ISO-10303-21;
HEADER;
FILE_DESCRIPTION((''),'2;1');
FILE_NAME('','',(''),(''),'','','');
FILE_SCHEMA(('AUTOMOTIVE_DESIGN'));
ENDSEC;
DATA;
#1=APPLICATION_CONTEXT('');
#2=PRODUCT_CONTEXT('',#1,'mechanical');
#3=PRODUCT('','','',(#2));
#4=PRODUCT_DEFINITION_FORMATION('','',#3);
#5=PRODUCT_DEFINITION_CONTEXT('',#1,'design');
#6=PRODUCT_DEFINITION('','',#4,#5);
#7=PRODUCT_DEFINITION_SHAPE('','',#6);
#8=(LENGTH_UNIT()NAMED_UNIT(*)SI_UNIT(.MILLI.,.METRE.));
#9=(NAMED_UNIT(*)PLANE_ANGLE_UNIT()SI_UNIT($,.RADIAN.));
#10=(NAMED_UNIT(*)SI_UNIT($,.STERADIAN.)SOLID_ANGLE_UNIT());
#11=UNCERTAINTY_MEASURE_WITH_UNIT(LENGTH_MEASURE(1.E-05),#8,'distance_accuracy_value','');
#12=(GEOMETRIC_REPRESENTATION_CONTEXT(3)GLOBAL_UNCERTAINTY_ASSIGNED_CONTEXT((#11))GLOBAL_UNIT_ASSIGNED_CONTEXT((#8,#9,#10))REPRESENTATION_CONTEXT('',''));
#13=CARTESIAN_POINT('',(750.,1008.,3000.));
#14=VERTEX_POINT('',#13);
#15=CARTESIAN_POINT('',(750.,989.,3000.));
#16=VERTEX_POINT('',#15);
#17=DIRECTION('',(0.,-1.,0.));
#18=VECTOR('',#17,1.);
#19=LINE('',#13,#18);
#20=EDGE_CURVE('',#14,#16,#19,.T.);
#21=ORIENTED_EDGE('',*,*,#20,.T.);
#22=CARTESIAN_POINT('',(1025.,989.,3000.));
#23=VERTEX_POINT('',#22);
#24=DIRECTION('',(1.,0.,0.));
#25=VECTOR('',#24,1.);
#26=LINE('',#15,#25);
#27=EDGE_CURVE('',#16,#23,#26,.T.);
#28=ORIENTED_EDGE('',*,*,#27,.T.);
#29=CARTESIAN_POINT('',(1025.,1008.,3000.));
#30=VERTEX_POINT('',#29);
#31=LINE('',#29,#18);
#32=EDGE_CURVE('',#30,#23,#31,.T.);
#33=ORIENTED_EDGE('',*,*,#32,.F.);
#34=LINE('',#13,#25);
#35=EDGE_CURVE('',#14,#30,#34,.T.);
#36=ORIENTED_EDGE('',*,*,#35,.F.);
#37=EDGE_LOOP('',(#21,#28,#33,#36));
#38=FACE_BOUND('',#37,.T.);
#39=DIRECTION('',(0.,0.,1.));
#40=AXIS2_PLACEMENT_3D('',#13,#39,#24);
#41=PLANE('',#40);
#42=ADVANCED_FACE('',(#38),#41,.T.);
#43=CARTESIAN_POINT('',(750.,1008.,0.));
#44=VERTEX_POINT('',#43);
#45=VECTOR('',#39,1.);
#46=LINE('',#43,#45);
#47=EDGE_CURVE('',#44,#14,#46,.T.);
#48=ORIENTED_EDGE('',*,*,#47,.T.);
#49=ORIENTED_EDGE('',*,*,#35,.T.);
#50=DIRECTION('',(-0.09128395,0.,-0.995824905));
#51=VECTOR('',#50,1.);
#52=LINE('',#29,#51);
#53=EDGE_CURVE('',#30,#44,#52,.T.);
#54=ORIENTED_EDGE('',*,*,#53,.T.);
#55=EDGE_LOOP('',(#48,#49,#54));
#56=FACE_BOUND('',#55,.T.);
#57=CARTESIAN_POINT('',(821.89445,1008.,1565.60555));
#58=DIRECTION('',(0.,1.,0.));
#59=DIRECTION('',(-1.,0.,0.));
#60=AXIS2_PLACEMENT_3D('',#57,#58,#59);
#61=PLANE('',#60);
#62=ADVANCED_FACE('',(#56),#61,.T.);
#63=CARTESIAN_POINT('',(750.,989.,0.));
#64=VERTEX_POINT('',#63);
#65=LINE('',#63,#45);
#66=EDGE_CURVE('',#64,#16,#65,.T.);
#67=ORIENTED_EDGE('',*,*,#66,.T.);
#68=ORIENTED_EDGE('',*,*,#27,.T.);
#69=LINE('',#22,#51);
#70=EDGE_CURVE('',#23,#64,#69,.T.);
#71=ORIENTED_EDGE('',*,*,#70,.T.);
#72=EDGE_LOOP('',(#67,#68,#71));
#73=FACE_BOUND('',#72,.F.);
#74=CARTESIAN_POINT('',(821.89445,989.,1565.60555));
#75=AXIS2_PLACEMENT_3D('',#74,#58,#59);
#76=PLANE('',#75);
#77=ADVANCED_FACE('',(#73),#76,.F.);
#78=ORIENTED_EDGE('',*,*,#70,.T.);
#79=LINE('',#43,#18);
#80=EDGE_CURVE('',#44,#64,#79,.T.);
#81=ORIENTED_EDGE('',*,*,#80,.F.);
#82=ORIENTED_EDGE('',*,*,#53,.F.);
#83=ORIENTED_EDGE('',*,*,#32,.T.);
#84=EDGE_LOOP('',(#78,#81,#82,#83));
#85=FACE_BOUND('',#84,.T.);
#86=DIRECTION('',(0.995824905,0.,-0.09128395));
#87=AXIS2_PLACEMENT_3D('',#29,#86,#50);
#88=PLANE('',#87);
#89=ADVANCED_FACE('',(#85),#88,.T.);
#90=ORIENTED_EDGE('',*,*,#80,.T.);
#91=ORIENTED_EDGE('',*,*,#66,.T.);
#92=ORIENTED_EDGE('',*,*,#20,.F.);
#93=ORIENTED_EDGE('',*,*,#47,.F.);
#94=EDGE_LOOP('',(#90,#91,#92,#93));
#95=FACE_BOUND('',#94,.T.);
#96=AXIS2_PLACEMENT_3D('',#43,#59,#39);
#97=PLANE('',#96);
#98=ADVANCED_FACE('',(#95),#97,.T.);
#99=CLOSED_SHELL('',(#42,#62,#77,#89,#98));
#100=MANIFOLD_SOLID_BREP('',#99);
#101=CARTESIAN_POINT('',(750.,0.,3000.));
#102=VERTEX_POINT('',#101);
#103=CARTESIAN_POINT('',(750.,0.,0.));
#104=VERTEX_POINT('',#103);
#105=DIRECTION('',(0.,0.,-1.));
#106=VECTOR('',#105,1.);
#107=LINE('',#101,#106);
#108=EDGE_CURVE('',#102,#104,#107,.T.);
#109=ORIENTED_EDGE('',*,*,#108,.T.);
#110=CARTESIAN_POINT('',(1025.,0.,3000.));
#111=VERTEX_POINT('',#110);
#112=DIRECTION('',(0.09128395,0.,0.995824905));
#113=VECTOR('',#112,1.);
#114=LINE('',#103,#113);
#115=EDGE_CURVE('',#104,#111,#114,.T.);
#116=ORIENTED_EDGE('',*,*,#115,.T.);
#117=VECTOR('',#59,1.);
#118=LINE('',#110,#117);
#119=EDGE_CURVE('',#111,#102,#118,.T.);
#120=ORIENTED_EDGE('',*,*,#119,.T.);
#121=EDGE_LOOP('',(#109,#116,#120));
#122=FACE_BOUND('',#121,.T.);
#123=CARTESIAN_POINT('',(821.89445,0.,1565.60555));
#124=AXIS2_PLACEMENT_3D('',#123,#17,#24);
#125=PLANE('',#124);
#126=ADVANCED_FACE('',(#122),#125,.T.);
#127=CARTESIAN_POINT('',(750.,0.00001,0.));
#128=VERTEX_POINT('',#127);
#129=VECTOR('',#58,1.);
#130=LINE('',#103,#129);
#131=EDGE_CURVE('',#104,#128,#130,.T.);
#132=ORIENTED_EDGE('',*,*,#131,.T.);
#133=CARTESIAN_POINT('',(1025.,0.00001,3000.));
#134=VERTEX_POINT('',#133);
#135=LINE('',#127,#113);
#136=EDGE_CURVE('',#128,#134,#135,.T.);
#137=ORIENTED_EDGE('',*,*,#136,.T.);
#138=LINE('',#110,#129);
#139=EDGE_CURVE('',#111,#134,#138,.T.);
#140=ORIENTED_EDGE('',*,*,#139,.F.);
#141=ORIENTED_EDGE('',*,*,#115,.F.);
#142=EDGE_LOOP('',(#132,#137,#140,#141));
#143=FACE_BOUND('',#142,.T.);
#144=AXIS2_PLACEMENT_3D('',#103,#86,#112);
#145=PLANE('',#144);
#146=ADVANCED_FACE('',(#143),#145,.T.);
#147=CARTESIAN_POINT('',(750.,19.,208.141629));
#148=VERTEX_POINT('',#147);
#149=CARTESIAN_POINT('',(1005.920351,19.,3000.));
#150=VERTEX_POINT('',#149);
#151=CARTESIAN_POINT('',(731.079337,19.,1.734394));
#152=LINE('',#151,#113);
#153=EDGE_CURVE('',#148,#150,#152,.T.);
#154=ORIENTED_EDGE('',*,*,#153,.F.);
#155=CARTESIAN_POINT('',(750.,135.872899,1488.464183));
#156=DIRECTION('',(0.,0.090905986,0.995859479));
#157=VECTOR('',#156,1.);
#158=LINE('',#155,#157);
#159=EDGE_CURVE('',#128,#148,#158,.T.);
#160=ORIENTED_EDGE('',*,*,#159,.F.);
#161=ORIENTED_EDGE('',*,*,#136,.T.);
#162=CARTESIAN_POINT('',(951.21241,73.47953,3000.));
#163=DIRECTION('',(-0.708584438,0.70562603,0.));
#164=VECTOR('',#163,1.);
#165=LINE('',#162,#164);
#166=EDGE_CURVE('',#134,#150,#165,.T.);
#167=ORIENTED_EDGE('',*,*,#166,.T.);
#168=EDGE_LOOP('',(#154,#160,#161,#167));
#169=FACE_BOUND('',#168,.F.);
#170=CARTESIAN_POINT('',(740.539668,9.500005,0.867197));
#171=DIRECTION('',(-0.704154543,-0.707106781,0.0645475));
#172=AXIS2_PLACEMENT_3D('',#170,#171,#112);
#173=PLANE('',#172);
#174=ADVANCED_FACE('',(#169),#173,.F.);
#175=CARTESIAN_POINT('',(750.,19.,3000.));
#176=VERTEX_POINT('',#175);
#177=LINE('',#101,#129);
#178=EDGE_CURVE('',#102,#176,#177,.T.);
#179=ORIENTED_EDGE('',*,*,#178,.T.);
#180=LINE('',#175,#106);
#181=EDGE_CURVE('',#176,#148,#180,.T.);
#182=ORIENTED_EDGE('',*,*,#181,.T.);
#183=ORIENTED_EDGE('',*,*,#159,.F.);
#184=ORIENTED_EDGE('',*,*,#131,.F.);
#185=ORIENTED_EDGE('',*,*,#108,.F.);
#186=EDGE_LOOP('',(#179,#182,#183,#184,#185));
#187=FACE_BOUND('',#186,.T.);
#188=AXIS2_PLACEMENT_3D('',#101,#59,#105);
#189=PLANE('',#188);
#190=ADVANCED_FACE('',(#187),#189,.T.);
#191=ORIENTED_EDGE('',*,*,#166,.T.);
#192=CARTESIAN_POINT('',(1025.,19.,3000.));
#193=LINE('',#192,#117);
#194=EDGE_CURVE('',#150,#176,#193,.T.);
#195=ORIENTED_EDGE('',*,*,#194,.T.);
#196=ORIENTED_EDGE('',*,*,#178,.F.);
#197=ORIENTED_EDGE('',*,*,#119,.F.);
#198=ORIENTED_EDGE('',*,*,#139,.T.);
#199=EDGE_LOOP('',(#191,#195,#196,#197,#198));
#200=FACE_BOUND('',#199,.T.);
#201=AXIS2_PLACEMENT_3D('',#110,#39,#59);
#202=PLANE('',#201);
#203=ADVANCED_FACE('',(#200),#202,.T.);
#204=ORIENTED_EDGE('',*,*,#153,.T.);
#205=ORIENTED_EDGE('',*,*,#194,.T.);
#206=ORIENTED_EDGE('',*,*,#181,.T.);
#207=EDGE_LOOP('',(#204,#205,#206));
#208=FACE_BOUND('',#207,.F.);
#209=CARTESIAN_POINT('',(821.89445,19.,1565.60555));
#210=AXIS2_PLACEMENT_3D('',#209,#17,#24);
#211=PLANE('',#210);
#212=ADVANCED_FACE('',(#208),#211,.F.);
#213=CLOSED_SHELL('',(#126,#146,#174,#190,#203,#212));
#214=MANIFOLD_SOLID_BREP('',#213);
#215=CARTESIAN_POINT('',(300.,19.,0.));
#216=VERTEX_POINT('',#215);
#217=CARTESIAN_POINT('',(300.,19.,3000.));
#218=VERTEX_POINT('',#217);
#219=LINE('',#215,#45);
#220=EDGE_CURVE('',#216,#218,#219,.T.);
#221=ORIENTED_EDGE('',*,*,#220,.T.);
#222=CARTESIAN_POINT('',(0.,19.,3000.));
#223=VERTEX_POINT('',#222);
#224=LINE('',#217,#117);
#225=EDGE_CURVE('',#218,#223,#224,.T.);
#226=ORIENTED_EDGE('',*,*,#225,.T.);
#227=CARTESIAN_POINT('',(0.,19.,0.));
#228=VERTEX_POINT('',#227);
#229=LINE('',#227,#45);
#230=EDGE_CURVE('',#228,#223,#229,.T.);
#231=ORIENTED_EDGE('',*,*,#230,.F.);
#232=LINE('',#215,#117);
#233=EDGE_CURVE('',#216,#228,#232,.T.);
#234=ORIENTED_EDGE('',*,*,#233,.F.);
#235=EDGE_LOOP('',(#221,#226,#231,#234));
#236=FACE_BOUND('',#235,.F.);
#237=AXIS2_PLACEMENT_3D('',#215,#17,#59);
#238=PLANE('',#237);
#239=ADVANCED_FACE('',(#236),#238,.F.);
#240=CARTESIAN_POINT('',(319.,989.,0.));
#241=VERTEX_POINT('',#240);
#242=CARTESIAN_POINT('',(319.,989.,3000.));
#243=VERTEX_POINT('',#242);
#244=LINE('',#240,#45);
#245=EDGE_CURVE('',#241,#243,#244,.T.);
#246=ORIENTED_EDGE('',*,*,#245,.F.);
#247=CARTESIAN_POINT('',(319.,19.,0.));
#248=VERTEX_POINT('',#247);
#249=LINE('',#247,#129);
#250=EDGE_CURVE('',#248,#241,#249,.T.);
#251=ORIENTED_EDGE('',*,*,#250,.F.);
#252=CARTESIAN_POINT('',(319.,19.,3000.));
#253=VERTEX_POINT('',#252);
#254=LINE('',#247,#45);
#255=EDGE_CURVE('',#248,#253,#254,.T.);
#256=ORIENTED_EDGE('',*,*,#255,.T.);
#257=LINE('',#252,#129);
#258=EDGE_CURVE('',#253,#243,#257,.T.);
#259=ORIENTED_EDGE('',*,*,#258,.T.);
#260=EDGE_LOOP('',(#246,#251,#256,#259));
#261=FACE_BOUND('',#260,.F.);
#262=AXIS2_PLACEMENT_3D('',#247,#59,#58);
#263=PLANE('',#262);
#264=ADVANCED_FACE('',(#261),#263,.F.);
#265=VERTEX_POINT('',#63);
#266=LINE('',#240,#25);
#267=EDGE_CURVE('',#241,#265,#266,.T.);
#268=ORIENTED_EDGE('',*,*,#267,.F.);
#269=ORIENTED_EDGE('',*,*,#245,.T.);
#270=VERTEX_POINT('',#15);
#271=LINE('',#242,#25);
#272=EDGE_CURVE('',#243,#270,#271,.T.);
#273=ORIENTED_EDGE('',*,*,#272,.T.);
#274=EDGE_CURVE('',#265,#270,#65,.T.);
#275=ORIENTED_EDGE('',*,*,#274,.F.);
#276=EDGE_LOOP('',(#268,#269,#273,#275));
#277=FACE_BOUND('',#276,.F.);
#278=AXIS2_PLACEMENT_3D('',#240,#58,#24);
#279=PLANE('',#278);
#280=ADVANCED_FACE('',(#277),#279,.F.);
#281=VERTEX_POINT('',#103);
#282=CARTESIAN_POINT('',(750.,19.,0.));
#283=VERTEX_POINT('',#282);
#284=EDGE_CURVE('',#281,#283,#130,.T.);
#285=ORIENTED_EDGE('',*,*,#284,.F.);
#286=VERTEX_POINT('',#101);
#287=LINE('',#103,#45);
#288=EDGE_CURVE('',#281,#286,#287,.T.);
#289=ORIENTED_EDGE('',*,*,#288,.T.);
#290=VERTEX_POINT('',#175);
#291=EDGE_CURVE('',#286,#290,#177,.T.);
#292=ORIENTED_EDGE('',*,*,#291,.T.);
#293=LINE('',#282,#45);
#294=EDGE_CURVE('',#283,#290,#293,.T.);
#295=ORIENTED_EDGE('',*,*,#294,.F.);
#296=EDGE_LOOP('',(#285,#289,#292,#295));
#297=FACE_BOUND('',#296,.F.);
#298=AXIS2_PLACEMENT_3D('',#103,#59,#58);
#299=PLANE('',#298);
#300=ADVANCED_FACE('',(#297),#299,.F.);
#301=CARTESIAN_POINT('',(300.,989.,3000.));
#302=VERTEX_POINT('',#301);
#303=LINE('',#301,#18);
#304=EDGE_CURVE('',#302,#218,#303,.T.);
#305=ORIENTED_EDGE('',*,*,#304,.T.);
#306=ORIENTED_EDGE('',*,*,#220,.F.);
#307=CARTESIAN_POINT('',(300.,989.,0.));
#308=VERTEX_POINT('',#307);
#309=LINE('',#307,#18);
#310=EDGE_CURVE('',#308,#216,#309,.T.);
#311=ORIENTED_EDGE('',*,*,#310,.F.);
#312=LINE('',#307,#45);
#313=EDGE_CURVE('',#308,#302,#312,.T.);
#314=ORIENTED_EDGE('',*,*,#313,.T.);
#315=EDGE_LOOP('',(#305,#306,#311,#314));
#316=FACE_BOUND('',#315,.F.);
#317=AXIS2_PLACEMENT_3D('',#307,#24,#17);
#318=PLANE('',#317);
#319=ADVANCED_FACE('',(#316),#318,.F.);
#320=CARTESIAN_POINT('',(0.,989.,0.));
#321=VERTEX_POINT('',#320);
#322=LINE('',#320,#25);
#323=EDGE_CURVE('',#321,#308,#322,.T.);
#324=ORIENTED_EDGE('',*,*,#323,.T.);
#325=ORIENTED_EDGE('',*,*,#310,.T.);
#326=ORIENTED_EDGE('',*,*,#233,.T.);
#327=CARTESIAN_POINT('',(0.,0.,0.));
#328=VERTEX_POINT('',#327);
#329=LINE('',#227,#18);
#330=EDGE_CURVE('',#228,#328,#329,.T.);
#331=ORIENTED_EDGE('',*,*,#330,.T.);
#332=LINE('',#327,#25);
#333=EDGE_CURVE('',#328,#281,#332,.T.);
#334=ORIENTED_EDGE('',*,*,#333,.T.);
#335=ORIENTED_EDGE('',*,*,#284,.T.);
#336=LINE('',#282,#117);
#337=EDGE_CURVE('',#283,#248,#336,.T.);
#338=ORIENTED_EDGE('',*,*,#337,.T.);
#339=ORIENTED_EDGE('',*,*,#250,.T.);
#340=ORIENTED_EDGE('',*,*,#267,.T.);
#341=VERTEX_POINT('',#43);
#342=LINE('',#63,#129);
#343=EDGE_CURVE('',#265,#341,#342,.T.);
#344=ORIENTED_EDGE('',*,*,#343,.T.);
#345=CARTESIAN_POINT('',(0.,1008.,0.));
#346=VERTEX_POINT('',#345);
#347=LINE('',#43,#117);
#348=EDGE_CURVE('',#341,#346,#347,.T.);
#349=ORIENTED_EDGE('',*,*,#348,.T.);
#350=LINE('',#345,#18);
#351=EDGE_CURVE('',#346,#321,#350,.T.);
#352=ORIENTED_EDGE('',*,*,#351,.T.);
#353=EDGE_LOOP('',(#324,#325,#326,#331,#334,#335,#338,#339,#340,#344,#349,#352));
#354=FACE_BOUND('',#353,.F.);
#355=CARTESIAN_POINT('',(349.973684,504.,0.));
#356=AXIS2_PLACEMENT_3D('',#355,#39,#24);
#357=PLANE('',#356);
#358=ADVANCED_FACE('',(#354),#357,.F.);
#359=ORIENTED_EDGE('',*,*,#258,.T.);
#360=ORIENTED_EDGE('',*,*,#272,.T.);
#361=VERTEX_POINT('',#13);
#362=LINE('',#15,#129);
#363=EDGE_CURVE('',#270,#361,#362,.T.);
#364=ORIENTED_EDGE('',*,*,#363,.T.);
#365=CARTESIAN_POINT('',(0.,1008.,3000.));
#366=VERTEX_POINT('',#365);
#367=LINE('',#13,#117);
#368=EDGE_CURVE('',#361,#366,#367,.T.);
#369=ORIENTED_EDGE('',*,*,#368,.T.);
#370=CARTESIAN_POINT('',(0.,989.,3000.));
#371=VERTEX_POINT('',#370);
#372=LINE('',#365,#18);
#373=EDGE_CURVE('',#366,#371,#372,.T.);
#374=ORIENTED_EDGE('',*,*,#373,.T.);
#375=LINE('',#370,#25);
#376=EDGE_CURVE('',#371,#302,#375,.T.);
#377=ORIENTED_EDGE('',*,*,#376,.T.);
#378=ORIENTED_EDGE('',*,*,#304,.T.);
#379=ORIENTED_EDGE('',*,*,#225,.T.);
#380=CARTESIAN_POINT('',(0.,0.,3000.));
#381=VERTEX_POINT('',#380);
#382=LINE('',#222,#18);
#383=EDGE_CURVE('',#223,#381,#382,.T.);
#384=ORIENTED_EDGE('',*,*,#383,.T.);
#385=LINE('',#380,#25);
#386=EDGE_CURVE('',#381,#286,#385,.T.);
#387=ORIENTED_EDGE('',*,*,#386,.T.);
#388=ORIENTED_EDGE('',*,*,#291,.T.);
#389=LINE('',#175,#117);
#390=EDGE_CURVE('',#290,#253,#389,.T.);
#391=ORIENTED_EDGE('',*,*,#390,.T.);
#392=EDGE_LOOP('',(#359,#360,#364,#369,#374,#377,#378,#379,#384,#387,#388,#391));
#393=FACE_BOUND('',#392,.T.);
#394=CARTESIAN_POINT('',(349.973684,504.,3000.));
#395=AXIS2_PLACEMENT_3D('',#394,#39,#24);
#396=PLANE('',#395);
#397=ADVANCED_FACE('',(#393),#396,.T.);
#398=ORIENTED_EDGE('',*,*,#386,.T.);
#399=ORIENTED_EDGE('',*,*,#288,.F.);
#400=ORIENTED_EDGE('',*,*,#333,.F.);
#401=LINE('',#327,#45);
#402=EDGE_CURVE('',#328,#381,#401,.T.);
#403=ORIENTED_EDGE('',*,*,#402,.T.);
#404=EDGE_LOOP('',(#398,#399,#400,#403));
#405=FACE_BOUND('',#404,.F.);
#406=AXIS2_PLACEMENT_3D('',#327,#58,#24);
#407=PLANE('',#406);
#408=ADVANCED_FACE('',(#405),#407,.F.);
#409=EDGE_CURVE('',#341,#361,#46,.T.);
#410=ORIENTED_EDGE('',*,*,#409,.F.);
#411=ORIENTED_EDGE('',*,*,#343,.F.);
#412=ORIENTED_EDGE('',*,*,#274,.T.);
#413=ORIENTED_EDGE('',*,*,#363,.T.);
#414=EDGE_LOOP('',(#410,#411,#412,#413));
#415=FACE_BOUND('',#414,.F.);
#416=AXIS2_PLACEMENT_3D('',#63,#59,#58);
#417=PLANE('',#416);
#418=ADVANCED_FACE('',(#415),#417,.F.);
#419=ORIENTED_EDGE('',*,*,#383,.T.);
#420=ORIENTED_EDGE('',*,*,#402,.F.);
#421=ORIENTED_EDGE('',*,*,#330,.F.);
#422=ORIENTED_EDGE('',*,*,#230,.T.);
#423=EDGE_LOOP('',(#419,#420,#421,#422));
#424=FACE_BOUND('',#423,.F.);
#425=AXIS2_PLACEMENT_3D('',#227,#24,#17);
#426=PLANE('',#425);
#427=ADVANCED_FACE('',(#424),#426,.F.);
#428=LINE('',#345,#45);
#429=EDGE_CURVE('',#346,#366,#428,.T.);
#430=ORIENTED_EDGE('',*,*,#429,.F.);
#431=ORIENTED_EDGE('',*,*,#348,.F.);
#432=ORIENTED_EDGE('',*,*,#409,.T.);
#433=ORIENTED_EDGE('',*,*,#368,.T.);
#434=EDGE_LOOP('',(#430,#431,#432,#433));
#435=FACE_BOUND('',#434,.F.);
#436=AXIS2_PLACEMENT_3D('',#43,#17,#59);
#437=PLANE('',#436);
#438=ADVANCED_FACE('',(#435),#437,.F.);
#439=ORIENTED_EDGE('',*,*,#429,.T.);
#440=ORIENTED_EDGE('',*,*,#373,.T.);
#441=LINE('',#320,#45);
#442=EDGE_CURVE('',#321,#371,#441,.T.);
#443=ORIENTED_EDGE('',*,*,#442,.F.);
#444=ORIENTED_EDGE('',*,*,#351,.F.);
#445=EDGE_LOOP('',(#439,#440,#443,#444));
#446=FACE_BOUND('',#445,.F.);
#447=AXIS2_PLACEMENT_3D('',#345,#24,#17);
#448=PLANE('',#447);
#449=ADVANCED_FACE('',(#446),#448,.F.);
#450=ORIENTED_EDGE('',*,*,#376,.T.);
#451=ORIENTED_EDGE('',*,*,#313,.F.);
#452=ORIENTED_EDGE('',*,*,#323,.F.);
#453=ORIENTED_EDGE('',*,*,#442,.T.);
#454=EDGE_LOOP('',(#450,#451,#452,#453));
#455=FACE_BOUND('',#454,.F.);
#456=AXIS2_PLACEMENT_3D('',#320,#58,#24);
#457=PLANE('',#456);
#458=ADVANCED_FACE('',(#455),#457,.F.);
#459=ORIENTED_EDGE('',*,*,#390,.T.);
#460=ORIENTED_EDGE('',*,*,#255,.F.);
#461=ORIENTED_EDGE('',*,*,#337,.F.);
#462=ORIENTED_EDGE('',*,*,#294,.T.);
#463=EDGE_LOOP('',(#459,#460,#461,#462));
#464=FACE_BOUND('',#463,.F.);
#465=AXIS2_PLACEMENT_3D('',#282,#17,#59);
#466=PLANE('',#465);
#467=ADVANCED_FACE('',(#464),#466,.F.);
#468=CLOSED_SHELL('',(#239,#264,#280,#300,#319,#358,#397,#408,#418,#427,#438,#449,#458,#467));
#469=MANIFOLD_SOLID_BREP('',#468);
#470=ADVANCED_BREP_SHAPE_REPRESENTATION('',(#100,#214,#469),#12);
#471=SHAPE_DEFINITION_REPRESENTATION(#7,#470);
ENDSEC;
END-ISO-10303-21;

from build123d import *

# Parameters (mm, degrees)
F1_DEPTH = 3000
F3_DEPTH = 19
F5_DEPTH = 19
F6_SIZE  = 18.99999


# Not quite as in the source:
# - a fillet or chamfer is up to 0.001 mm smaller than in the source, because OpenCascade refuses the exact size


with BuildPart() as f1:
    # F0 (on Top) → F1 (new body)
    with BuildSketch(Plane.XY):
        Polygon((0, 19), (0, 0), (750, 0), (750, 19), (319, 19), (319, 989), (750, 989), (750, 1008), (0, 1008), (0, 989), (300, 989), (300, 19), align=None)
    extrude(amount=F1_DEPTH)


with BuildPart() as f3:
    # F2 (on face) → F3 (new body)
    with BuildSketch(Plane.XZ):
        Polygon((1025, 3000), (750, 3000), (750, 0), align=None)
    extrude(amount=-F3_DEPTH)

    # F6 (size 19 in the source; OpenCascade refuses exactly that, so slightly less here)
    f6_edges = [f3.edges().sort_by_distance(p)[0] for p in [
        (887.5, 19, 1500),
    ]]
    chamfer(f6_edges, length=F6_SIZE)


with BuildPart() as f5:
    # F4 (on face) → F5 (new body)
    with BuildSketch(Plane(origin=(0, 1008, 0), x_dir=(-1, 0, 0), z_dir=(0, 1, 0))):
        Polygon((-750, 0), (-750, 3000), (-1025, 3000), align=None)
    extrude(amount=-F5_DEPTH)


solid = Compound([f1.part, f3.part, f5.part])
